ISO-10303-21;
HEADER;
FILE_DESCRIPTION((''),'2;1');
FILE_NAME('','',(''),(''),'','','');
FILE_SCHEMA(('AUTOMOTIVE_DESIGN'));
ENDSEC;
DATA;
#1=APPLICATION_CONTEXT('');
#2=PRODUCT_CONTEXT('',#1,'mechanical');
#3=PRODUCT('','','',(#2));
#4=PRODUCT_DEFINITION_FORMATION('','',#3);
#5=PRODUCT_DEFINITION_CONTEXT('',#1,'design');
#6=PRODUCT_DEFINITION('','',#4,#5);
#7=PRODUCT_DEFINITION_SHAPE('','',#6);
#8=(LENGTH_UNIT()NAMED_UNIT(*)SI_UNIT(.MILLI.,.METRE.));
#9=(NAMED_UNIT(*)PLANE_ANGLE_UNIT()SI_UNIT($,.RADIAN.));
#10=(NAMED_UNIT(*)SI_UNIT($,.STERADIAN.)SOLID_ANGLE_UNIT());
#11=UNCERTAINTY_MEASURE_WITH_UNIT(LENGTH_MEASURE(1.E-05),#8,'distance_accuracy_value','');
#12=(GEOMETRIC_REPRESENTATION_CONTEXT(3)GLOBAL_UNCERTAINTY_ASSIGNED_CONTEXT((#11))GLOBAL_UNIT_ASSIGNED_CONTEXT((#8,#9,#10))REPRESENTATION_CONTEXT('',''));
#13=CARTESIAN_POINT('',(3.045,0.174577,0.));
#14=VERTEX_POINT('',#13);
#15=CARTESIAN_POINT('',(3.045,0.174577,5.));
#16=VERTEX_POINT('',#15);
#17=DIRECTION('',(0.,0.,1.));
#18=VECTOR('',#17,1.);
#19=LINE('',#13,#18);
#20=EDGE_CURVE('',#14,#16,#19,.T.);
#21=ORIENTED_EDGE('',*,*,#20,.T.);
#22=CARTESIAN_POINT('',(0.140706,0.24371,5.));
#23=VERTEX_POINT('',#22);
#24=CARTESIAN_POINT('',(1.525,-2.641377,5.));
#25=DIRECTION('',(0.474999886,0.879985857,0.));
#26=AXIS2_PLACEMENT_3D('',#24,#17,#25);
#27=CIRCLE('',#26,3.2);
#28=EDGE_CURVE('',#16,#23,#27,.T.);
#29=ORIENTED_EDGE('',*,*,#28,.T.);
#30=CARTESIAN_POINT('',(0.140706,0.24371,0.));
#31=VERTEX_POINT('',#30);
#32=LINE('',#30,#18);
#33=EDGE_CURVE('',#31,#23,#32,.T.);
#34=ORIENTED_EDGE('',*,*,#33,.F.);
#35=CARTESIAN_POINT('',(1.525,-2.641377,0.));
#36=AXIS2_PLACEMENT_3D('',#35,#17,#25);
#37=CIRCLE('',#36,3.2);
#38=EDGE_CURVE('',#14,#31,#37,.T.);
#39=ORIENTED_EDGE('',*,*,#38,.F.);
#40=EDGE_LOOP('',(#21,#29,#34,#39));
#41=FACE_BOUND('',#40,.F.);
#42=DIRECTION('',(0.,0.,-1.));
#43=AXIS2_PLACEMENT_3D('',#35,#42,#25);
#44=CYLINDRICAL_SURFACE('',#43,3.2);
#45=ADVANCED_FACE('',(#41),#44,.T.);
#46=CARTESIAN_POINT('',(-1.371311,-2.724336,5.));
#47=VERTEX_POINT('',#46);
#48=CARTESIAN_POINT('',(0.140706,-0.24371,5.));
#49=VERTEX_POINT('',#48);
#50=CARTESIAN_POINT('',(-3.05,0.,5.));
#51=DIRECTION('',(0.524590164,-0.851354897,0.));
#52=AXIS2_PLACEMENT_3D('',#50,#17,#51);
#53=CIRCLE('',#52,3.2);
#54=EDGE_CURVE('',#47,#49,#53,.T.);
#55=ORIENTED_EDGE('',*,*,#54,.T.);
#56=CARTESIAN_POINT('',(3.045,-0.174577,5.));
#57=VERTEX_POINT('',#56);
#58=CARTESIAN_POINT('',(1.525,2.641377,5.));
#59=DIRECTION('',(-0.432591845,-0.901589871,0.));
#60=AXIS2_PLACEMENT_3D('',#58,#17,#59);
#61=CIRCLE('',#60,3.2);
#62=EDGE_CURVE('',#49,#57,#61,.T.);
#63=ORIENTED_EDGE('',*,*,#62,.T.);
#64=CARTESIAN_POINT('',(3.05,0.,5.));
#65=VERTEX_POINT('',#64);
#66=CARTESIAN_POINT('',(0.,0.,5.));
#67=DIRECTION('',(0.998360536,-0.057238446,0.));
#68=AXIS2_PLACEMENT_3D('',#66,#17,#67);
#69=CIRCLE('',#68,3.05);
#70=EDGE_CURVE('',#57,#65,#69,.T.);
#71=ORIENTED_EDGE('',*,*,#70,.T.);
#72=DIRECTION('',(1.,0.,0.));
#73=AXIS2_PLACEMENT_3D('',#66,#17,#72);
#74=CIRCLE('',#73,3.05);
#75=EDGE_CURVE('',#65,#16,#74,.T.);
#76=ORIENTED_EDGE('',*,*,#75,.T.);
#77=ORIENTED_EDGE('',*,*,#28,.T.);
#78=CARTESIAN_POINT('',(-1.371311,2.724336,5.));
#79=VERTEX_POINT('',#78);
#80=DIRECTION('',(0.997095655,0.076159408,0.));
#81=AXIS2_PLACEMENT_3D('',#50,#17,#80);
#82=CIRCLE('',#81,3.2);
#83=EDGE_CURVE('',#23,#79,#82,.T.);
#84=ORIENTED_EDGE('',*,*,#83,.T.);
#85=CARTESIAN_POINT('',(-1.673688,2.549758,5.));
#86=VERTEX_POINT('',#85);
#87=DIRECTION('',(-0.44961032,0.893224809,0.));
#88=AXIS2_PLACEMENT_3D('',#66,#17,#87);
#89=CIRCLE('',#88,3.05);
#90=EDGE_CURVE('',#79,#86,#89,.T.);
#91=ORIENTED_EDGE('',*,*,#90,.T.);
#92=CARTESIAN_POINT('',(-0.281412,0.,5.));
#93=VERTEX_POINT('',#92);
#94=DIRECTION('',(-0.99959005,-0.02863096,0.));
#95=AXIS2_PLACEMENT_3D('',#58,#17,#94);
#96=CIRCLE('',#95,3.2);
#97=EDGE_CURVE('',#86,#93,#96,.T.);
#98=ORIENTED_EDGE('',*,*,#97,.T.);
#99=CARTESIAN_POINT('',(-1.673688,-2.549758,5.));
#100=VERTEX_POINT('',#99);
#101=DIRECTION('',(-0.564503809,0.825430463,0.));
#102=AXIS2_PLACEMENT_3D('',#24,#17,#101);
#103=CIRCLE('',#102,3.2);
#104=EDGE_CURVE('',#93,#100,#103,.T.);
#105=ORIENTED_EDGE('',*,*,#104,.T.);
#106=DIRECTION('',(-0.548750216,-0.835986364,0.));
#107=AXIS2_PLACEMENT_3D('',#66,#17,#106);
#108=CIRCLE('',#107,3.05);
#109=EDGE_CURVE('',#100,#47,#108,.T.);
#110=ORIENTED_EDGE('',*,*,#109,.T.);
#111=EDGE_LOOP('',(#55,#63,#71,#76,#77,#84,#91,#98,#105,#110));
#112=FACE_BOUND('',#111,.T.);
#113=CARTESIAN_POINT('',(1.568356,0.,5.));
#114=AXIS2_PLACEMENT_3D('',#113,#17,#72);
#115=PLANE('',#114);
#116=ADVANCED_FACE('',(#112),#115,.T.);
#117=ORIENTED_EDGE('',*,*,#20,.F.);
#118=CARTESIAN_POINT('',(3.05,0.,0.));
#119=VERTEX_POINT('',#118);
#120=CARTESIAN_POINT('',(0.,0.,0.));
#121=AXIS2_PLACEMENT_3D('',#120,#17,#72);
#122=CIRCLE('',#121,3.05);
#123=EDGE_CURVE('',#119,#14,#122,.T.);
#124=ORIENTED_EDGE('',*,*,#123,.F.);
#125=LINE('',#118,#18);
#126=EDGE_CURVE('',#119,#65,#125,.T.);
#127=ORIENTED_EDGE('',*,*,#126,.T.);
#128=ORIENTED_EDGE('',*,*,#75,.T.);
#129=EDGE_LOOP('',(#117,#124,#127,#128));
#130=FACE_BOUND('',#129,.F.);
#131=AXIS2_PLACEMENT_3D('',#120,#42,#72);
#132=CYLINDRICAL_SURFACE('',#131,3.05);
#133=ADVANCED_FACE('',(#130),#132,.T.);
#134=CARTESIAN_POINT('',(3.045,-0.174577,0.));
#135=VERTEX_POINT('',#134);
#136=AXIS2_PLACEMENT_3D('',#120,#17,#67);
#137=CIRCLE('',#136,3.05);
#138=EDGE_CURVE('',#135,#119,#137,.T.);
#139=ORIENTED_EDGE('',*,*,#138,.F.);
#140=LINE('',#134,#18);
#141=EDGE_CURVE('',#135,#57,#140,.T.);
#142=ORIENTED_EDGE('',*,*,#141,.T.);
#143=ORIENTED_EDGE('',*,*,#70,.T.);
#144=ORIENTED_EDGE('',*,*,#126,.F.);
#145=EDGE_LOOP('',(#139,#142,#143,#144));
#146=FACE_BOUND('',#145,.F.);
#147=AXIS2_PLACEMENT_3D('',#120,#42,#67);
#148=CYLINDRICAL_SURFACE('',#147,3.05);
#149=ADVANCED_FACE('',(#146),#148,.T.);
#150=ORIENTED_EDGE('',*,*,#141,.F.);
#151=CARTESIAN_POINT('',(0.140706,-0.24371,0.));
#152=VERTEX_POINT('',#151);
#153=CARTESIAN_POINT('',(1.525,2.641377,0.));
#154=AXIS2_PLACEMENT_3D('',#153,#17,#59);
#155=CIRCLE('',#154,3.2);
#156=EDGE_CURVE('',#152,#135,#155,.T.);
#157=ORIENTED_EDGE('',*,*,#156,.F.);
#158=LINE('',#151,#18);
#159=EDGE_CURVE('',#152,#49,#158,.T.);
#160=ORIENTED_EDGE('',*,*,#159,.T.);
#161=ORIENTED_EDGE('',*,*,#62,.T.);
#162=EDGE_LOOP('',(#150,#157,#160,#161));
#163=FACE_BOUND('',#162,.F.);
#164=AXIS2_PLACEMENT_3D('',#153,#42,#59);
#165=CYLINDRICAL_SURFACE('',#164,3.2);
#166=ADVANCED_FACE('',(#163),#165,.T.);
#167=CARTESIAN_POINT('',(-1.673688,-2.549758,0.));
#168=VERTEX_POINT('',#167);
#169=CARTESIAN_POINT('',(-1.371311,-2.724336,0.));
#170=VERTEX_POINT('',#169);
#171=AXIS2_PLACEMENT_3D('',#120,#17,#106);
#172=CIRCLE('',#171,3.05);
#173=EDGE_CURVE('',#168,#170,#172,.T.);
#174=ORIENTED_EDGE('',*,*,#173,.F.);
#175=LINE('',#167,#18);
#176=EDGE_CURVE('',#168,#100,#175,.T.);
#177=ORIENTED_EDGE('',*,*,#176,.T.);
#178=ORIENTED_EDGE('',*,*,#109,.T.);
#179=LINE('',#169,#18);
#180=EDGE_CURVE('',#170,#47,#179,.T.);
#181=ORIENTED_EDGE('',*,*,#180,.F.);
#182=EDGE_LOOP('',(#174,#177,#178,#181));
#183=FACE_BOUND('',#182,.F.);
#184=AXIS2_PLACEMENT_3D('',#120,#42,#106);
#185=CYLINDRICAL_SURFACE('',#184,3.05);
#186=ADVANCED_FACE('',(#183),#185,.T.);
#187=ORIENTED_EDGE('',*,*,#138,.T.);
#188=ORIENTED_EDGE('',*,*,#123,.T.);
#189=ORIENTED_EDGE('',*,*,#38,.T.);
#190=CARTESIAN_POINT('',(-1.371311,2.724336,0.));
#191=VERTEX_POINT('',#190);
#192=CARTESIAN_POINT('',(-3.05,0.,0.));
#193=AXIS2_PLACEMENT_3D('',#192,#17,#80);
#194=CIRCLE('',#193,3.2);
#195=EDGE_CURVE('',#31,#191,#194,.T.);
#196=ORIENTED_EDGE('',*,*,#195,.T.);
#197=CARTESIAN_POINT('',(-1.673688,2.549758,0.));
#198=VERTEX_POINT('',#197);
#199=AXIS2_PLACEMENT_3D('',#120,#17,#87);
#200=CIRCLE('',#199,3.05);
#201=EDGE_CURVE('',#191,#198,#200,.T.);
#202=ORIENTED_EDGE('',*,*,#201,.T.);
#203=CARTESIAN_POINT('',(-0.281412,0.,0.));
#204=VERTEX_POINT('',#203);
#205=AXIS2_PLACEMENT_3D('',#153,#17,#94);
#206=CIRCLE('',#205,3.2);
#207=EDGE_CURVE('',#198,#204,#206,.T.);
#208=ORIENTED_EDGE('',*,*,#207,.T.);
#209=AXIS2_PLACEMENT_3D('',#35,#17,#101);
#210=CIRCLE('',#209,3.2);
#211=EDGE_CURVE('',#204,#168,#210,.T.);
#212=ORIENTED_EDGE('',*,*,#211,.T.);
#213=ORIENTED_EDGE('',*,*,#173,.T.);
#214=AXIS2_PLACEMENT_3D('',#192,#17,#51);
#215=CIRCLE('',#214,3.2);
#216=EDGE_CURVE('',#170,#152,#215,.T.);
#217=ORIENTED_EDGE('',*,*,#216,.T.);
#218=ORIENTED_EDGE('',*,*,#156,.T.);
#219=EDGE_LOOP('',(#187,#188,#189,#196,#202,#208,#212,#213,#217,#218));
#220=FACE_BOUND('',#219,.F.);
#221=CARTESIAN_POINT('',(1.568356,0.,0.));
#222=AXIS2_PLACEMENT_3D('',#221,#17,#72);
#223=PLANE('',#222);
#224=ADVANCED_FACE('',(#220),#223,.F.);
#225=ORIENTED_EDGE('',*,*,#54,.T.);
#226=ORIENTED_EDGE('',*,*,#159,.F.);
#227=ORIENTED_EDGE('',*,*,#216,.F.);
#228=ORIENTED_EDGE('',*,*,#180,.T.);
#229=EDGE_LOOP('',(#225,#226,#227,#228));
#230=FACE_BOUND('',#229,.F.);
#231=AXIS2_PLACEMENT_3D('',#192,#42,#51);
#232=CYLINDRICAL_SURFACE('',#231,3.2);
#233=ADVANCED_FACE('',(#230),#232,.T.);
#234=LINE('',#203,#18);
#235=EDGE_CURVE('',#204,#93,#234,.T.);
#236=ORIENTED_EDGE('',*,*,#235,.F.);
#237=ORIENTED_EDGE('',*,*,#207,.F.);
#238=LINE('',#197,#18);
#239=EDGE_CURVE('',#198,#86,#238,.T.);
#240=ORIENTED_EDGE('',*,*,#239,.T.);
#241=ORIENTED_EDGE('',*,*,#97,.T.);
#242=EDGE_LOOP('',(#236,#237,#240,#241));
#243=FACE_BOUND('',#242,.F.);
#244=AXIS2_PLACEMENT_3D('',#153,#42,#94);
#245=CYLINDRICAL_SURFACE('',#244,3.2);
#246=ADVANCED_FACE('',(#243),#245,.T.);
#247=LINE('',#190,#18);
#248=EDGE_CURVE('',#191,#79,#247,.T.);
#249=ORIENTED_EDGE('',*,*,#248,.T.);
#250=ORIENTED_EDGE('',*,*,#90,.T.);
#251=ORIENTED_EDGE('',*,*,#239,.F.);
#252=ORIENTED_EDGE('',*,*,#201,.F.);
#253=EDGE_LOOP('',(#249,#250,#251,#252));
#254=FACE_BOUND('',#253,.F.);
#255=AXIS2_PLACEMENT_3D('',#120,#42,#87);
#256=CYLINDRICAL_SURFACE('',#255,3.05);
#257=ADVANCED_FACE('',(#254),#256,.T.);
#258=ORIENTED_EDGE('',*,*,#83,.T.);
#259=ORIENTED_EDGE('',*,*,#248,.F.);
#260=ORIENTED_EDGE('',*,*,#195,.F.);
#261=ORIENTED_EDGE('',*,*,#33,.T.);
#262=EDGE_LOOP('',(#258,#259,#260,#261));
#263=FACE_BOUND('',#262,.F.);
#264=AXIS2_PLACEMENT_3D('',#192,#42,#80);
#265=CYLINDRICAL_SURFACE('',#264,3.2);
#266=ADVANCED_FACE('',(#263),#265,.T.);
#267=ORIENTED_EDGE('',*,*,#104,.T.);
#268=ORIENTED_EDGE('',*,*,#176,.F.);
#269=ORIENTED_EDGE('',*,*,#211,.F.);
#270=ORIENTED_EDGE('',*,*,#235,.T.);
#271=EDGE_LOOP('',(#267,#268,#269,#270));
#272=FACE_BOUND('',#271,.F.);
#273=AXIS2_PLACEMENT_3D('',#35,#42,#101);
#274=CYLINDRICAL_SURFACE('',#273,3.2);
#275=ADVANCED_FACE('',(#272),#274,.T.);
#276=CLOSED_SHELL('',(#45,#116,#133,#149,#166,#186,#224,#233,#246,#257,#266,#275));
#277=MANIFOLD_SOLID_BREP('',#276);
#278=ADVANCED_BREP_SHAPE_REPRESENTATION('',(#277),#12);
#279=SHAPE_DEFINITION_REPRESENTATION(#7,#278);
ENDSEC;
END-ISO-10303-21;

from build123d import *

# Parameters (mm, degrees)
F1_DEPTH = 5


with BuildPart() as f1:
    # F0 (on Top) → F1 (new body)
    with BuildSketch(Plane.XY):
        with BuildLine():
            ThreePointArc((3.0449996355, -0.1745772603), (3.0487496526, -0.0873244288), (3.05, 0))
            ThreePointArc((3.05, 0), (3.0487496526, 0.0873244288), (3.0449996355, 0.1745772603))
            ThreePointArc((3.0449996355, 0.1745772603), (1.6011501733, 0.55771632), (0.140706095, 0.2437101054))
            ThreePointArc((0.140706095, 0.2437101054), (0.1476756796, 0.1219436265), (0.15, 0))
            ThreePointArc((0.15, 0), (0.1476756796, -0.1219436265), (0.140706095, -0.2437101054))
            ThreePointArc((0.140706095, -0.2437101054), (1.6011501733, -0.55771632), (3.0449996355, -0.1745772603))
        make_face()
        with BuildLine():
            ThreePointArc((0.140706095, 0.2437101054), (-0.3175785854, 1.6654948853), (-1.3713114754, 2.724335669))
            ThreePointArc((-1.3713114754, 2.724335669), (-1.525, 2.6413774815), (-1.6736881601, 2.5497584087))
            ThreePointArc((-1.6736881601, 2.5497584087), (-1.2835715879, 1.1077785653), (-0.28141219, 0))
            ThreePointArc((-0.28141219, 0), (-0.075, 0.1299038106), (0.140706095, 0.2437101054))
        make_face()
        with BuildLine():
            ThreePointArc((0.15, 0), (0.1476756796, 0.1219436265), (0.140706095, 0.2437101054))
            ThreePointArc((0.140706095, 0.2437101054), (-0.075, 0.1299038106), (-0.28141219, 0))
            ThreePointArc((-0.28141219, 0), (-0.075, -0.1299038106), (0.140706095, -0.2437101054))
            ThreePointArc((0.140706095, -0.2437101054), (0.1476756796, -0.1219436265), (0.15, 0))
        make_face()
        with BuildLine():
            ThreePointArc((-1.6736881601, -2.5497584087), (-1.525, -2.6413774815), (-1.3713114754, -2.724335669))
            ThreePointArc((-1.3713114754, -2.724335669), (-0.3175785854, -1.6654948853), (0.140706095, -0.2437101054))
            ThreePointArc((0.140706095, -0.2437101054), (-0.075, -0.1299038106), (-0.28141219, 0))
            ThreePointArc((-0.28141219, 0), (-1.2835715879, -1.1077785653), (-1.6736881601, -2.5497584087))
        make_face()
    extrude(amount=F1_DEPTH)


solid = f1.part
